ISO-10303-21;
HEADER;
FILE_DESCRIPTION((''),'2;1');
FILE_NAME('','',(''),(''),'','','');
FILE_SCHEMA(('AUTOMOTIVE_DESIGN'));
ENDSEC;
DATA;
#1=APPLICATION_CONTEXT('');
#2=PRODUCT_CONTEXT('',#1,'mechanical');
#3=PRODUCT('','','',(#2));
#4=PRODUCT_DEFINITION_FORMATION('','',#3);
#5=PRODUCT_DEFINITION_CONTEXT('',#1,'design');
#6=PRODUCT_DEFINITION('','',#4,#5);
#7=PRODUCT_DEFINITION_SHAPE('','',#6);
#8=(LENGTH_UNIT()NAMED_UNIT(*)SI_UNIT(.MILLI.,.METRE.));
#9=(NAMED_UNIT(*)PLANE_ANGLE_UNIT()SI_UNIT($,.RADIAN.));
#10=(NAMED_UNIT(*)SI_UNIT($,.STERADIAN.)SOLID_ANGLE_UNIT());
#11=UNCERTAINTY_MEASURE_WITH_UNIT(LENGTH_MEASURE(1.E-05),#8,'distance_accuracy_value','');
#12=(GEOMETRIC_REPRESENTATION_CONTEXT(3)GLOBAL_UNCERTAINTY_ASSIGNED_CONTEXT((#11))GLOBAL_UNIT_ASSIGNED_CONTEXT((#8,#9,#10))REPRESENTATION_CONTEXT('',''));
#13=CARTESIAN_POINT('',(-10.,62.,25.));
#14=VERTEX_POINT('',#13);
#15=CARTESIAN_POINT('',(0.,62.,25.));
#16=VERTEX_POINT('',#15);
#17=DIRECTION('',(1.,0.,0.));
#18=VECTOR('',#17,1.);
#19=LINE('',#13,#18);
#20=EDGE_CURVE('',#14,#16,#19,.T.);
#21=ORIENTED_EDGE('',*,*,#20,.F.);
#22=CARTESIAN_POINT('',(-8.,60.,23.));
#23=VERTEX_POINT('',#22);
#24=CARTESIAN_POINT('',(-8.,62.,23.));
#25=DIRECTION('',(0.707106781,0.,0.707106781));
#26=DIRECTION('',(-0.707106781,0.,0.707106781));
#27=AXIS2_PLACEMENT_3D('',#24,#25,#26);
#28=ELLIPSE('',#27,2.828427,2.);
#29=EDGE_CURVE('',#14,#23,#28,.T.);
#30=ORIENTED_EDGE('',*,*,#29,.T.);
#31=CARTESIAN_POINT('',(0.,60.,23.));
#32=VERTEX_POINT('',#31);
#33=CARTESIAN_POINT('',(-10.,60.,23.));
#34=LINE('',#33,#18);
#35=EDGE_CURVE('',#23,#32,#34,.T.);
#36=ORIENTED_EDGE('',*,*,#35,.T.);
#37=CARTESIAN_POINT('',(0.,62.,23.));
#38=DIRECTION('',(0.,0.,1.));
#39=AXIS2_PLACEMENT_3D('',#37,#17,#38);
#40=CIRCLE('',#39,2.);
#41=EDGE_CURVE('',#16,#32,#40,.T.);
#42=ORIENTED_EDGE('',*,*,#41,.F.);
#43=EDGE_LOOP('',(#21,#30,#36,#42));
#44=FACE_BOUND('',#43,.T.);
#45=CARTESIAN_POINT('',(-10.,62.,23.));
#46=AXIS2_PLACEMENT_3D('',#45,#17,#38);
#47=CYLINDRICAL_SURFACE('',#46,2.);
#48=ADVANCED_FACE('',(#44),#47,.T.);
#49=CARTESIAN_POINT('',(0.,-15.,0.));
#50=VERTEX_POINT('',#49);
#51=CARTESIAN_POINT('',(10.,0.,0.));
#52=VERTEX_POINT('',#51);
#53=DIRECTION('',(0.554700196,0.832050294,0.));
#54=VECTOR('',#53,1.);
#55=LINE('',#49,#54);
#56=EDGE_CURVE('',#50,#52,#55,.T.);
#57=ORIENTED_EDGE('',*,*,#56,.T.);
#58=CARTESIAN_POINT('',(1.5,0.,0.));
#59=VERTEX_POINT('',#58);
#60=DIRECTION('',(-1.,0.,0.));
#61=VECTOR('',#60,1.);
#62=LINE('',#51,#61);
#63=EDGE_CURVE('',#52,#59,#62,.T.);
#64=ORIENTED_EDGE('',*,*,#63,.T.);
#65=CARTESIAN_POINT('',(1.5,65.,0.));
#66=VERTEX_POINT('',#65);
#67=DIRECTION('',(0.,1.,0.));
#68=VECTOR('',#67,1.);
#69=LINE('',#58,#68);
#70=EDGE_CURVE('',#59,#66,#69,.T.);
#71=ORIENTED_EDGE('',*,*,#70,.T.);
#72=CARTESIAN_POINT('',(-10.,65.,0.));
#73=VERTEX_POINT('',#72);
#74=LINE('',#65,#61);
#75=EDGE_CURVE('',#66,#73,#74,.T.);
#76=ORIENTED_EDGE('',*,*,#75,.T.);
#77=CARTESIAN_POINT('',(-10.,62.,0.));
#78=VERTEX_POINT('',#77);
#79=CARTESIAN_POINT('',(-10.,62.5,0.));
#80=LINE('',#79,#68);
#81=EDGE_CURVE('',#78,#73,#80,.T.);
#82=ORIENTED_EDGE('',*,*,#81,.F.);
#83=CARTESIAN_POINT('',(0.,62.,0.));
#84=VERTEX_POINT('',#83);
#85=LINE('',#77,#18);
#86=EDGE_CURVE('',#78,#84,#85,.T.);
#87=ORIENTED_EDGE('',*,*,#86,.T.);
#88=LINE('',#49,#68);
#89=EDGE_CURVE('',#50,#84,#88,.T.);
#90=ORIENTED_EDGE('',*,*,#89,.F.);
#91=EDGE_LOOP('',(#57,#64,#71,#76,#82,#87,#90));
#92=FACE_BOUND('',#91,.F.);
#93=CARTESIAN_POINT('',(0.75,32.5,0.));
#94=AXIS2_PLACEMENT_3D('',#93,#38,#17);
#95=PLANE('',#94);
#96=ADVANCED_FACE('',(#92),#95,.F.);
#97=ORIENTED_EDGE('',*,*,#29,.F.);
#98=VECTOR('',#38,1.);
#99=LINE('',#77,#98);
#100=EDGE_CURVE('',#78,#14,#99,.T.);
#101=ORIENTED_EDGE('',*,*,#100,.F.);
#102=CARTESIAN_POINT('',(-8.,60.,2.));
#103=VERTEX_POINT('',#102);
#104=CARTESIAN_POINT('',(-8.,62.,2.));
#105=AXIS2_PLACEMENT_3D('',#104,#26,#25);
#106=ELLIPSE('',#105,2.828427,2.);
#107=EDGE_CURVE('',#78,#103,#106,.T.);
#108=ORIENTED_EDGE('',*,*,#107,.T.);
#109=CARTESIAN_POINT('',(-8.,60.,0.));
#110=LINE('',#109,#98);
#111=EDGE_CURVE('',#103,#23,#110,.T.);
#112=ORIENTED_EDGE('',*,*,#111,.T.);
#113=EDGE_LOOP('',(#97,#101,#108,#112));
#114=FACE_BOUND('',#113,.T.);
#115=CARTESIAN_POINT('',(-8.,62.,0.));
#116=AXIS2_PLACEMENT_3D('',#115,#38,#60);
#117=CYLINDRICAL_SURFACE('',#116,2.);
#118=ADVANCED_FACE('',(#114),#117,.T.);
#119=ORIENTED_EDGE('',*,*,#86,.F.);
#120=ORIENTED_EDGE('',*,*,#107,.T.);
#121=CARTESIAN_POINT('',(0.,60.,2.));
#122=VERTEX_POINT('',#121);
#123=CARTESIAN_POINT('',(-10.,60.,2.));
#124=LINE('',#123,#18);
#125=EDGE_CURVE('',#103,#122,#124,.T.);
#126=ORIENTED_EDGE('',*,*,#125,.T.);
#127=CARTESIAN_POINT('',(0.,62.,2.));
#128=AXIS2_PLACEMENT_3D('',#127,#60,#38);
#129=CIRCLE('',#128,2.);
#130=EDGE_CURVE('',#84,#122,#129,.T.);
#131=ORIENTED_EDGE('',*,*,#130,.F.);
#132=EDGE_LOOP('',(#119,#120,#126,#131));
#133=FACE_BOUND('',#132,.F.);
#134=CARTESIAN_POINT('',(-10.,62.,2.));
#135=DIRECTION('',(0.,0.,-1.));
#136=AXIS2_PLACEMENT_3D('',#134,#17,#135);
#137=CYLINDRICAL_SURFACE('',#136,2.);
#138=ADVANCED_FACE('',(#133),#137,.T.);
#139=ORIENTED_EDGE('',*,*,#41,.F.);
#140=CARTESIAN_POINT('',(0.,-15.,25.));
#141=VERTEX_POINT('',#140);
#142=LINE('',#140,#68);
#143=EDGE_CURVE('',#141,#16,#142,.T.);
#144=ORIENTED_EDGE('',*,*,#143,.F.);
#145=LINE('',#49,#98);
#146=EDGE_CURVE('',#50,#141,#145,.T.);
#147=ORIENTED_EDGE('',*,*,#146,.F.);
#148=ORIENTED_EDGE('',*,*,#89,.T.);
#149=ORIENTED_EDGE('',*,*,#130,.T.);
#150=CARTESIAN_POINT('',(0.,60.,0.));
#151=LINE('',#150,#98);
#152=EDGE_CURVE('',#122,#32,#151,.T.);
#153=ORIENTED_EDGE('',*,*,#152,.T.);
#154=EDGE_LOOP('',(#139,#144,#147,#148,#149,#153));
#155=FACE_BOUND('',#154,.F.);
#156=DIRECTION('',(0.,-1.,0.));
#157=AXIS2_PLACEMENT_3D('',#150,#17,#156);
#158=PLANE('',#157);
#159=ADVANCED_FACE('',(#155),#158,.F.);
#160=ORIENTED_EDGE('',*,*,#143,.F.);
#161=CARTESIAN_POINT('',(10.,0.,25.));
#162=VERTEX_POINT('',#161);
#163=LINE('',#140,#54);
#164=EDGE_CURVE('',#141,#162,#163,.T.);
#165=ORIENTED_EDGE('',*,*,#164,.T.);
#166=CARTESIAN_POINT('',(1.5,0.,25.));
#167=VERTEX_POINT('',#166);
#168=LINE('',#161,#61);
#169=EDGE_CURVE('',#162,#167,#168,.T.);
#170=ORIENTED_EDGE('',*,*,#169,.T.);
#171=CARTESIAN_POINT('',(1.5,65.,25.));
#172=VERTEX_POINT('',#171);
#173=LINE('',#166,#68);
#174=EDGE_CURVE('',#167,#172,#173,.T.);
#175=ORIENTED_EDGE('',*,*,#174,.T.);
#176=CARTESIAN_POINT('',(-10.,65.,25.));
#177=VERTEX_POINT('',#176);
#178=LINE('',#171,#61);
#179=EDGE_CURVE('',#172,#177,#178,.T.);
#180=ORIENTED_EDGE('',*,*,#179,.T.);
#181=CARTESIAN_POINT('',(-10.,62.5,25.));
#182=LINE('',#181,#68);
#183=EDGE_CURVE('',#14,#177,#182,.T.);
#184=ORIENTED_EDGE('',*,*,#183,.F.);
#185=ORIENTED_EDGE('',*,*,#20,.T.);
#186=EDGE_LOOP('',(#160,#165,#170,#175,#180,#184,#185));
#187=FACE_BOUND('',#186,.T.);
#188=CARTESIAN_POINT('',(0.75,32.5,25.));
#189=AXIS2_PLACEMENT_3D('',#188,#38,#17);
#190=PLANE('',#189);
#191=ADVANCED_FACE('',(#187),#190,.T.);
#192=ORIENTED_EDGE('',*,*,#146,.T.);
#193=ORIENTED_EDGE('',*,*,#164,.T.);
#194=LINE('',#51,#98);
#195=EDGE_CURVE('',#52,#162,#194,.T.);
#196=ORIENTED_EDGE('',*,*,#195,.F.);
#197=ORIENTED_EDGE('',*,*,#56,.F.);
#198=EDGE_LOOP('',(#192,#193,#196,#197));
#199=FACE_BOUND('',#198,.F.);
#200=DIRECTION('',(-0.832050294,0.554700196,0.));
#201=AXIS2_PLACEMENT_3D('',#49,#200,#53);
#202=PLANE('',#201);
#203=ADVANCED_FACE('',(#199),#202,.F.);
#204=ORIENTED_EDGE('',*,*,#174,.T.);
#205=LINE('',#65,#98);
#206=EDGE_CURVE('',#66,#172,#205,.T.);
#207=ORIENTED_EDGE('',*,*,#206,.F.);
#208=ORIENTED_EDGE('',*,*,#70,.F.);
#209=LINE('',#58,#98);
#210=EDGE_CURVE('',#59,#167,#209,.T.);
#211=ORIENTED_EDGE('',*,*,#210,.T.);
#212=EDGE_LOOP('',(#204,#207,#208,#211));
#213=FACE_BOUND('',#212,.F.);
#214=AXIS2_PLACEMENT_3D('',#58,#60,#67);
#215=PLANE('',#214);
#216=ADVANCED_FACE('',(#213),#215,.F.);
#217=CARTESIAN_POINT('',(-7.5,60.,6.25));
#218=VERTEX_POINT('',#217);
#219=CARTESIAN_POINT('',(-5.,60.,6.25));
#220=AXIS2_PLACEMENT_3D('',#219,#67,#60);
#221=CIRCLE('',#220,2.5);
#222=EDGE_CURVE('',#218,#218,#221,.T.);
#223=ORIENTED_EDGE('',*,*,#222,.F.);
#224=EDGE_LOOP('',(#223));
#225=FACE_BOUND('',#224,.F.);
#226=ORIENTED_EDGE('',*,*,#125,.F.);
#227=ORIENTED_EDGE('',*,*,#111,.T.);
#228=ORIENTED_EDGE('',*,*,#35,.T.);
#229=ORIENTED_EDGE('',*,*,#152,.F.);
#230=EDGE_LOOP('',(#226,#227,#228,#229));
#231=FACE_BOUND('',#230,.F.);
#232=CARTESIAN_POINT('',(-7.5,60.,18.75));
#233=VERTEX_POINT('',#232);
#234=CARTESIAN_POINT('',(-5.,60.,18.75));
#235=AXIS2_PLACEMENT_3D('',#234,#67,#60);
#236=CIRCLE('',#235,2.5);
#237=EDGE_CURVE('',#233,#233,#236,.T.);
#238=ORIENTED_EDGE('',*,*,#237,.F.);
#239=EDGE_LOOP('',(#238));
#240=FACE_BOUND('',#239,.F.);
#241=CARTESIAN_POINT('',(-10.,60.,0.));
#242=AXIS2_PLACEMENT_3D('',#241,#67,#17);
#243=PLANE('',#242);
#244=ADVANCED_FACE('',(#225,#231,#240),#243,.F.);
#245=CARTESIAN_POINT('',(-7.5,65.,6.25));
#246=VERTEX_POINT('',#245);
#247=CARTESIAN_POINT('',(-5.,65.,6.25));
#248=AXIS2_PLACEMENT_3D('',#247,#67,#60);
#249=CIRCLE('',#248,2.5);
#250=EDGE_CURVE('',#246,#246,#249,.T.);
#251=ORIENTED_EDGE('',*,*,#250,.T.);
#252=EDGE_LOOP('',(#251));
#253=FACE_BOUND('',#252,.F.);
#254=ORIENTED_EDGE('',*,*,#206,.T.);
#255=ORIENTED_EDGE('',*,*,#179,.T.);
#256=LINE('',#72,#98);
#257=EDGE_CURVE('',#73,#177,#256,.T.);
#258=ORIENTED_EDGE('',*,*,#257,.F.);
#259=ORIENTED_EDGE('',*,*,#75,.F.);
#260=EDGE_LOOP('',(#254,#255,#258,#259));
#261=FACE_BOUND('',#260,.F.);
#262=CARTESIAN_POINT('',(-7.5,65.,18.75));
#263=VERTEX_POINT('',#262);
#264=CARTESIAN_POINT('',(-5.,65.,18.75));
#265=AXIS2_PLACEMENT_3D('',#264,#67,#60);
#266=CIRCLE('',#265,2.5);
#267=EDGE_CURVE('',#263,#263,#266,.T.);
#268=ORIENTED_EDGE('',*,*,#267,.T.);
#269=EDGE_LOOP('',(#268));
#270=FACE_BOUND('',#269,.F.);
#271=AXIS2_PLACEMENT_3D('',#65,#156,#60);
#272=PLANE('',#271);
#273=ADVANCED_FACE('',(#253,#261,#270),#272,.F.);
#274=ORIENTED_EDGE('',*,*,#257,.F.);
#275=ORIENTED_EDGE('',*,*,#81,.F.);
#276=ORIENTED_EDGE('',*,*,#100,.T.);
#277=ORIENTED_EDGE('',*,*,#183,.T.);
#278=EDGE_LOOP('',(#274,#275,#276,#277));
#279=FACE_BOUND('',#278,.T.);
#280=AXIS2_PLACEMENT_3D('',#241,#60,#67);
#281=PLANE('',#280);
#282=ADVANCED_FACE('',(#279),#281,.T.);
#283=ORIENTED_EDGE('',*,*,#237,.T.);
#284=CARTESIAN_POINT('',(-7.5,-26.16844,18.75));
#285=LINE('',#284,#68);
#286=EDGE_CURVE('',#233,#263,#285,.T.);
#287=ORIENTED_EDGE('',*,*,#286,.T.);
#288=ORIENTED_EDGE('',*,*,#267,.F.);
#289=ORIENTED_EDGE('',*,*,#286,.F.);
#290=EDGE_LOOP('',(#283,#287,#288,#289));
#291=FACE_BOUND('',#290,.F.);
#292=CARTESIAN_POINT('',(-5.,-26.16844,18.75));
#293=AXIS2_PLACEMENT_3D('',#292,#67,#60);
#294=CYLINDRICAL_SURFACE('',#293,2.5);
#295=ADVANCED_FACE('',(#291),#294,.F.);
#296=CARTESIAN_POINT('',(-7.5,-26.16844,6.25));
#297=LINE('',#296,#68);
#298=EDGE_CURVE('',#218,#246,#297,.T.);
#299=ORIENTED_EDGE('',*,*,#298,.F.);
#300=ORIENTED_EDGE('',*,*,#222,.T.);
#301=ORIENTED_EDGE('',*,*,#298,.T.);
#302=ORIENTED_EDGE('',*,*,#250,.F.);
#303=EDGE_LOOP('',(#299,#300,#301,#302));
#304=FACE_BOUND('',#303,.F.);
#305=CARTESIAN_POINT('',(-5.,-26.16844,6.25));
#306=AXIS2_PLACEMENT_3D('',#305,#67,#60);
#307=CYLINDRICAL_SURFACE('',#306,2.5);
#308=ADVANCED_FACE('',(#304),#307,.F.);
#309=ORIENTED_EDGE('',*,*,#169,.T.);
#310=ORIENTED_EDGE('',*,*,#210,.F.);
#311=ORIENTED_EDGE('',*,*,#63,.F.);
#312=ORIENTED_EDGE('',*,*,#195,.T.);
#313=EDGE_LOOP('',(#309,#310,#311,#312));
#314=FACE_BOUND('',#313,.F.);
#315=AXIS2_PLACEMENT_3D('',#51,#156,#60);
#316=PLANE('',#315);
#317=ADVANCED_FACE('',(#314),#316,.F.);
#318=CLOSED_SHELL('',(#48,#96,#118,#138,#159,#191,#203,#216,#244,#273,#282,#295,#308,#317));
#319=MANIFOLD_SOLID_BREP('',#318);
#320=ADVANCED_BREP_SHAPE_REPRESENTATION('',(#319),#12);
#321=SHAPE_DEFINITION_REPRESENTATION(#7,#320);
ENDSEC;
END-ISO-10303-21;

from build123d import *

# Parameters (mm, degrees)
F0_W     = 10
F0_H     = 5
F1_DEPTH = 25
F3_D     = 5
F4_R     = 2


# Not quite as in the source:
# - a feature names something its author has since deleted; it is built from what else it names


with BuildPart() as f1:
    # F0 (on Top) → F1 (new body)
    with BuildSketch(Plane.XY):
        Polygon((0, 60), (0, 0), (1.5, 0), (1.5, 65), (0, 65), align=None)
        with Locations((-5, 62.5)):
            Rectangle(F0_W, F0_H)
        Polygon((1.5, 0), (0, 0), (0, -15), (10, 0), align=None)
    extrude(amount=F1_DEPTH)

    # F3 (through all)
    with Locations(Plane.XZ.offset(-60)):
        with Locations((-5, 18.75), (-5, 6.25)):
            Hole(F3_D / 2)

    # F4
    f4_edges = [f1.edges().sort_by_distance(p)[0] for p in [
        (-10, 60, 12.5),
        (-5, 60, 25),
        (-5, 60, 0),
    ]]
    fillet(f4_edges, radius=F4_R)


solid = f1.part
